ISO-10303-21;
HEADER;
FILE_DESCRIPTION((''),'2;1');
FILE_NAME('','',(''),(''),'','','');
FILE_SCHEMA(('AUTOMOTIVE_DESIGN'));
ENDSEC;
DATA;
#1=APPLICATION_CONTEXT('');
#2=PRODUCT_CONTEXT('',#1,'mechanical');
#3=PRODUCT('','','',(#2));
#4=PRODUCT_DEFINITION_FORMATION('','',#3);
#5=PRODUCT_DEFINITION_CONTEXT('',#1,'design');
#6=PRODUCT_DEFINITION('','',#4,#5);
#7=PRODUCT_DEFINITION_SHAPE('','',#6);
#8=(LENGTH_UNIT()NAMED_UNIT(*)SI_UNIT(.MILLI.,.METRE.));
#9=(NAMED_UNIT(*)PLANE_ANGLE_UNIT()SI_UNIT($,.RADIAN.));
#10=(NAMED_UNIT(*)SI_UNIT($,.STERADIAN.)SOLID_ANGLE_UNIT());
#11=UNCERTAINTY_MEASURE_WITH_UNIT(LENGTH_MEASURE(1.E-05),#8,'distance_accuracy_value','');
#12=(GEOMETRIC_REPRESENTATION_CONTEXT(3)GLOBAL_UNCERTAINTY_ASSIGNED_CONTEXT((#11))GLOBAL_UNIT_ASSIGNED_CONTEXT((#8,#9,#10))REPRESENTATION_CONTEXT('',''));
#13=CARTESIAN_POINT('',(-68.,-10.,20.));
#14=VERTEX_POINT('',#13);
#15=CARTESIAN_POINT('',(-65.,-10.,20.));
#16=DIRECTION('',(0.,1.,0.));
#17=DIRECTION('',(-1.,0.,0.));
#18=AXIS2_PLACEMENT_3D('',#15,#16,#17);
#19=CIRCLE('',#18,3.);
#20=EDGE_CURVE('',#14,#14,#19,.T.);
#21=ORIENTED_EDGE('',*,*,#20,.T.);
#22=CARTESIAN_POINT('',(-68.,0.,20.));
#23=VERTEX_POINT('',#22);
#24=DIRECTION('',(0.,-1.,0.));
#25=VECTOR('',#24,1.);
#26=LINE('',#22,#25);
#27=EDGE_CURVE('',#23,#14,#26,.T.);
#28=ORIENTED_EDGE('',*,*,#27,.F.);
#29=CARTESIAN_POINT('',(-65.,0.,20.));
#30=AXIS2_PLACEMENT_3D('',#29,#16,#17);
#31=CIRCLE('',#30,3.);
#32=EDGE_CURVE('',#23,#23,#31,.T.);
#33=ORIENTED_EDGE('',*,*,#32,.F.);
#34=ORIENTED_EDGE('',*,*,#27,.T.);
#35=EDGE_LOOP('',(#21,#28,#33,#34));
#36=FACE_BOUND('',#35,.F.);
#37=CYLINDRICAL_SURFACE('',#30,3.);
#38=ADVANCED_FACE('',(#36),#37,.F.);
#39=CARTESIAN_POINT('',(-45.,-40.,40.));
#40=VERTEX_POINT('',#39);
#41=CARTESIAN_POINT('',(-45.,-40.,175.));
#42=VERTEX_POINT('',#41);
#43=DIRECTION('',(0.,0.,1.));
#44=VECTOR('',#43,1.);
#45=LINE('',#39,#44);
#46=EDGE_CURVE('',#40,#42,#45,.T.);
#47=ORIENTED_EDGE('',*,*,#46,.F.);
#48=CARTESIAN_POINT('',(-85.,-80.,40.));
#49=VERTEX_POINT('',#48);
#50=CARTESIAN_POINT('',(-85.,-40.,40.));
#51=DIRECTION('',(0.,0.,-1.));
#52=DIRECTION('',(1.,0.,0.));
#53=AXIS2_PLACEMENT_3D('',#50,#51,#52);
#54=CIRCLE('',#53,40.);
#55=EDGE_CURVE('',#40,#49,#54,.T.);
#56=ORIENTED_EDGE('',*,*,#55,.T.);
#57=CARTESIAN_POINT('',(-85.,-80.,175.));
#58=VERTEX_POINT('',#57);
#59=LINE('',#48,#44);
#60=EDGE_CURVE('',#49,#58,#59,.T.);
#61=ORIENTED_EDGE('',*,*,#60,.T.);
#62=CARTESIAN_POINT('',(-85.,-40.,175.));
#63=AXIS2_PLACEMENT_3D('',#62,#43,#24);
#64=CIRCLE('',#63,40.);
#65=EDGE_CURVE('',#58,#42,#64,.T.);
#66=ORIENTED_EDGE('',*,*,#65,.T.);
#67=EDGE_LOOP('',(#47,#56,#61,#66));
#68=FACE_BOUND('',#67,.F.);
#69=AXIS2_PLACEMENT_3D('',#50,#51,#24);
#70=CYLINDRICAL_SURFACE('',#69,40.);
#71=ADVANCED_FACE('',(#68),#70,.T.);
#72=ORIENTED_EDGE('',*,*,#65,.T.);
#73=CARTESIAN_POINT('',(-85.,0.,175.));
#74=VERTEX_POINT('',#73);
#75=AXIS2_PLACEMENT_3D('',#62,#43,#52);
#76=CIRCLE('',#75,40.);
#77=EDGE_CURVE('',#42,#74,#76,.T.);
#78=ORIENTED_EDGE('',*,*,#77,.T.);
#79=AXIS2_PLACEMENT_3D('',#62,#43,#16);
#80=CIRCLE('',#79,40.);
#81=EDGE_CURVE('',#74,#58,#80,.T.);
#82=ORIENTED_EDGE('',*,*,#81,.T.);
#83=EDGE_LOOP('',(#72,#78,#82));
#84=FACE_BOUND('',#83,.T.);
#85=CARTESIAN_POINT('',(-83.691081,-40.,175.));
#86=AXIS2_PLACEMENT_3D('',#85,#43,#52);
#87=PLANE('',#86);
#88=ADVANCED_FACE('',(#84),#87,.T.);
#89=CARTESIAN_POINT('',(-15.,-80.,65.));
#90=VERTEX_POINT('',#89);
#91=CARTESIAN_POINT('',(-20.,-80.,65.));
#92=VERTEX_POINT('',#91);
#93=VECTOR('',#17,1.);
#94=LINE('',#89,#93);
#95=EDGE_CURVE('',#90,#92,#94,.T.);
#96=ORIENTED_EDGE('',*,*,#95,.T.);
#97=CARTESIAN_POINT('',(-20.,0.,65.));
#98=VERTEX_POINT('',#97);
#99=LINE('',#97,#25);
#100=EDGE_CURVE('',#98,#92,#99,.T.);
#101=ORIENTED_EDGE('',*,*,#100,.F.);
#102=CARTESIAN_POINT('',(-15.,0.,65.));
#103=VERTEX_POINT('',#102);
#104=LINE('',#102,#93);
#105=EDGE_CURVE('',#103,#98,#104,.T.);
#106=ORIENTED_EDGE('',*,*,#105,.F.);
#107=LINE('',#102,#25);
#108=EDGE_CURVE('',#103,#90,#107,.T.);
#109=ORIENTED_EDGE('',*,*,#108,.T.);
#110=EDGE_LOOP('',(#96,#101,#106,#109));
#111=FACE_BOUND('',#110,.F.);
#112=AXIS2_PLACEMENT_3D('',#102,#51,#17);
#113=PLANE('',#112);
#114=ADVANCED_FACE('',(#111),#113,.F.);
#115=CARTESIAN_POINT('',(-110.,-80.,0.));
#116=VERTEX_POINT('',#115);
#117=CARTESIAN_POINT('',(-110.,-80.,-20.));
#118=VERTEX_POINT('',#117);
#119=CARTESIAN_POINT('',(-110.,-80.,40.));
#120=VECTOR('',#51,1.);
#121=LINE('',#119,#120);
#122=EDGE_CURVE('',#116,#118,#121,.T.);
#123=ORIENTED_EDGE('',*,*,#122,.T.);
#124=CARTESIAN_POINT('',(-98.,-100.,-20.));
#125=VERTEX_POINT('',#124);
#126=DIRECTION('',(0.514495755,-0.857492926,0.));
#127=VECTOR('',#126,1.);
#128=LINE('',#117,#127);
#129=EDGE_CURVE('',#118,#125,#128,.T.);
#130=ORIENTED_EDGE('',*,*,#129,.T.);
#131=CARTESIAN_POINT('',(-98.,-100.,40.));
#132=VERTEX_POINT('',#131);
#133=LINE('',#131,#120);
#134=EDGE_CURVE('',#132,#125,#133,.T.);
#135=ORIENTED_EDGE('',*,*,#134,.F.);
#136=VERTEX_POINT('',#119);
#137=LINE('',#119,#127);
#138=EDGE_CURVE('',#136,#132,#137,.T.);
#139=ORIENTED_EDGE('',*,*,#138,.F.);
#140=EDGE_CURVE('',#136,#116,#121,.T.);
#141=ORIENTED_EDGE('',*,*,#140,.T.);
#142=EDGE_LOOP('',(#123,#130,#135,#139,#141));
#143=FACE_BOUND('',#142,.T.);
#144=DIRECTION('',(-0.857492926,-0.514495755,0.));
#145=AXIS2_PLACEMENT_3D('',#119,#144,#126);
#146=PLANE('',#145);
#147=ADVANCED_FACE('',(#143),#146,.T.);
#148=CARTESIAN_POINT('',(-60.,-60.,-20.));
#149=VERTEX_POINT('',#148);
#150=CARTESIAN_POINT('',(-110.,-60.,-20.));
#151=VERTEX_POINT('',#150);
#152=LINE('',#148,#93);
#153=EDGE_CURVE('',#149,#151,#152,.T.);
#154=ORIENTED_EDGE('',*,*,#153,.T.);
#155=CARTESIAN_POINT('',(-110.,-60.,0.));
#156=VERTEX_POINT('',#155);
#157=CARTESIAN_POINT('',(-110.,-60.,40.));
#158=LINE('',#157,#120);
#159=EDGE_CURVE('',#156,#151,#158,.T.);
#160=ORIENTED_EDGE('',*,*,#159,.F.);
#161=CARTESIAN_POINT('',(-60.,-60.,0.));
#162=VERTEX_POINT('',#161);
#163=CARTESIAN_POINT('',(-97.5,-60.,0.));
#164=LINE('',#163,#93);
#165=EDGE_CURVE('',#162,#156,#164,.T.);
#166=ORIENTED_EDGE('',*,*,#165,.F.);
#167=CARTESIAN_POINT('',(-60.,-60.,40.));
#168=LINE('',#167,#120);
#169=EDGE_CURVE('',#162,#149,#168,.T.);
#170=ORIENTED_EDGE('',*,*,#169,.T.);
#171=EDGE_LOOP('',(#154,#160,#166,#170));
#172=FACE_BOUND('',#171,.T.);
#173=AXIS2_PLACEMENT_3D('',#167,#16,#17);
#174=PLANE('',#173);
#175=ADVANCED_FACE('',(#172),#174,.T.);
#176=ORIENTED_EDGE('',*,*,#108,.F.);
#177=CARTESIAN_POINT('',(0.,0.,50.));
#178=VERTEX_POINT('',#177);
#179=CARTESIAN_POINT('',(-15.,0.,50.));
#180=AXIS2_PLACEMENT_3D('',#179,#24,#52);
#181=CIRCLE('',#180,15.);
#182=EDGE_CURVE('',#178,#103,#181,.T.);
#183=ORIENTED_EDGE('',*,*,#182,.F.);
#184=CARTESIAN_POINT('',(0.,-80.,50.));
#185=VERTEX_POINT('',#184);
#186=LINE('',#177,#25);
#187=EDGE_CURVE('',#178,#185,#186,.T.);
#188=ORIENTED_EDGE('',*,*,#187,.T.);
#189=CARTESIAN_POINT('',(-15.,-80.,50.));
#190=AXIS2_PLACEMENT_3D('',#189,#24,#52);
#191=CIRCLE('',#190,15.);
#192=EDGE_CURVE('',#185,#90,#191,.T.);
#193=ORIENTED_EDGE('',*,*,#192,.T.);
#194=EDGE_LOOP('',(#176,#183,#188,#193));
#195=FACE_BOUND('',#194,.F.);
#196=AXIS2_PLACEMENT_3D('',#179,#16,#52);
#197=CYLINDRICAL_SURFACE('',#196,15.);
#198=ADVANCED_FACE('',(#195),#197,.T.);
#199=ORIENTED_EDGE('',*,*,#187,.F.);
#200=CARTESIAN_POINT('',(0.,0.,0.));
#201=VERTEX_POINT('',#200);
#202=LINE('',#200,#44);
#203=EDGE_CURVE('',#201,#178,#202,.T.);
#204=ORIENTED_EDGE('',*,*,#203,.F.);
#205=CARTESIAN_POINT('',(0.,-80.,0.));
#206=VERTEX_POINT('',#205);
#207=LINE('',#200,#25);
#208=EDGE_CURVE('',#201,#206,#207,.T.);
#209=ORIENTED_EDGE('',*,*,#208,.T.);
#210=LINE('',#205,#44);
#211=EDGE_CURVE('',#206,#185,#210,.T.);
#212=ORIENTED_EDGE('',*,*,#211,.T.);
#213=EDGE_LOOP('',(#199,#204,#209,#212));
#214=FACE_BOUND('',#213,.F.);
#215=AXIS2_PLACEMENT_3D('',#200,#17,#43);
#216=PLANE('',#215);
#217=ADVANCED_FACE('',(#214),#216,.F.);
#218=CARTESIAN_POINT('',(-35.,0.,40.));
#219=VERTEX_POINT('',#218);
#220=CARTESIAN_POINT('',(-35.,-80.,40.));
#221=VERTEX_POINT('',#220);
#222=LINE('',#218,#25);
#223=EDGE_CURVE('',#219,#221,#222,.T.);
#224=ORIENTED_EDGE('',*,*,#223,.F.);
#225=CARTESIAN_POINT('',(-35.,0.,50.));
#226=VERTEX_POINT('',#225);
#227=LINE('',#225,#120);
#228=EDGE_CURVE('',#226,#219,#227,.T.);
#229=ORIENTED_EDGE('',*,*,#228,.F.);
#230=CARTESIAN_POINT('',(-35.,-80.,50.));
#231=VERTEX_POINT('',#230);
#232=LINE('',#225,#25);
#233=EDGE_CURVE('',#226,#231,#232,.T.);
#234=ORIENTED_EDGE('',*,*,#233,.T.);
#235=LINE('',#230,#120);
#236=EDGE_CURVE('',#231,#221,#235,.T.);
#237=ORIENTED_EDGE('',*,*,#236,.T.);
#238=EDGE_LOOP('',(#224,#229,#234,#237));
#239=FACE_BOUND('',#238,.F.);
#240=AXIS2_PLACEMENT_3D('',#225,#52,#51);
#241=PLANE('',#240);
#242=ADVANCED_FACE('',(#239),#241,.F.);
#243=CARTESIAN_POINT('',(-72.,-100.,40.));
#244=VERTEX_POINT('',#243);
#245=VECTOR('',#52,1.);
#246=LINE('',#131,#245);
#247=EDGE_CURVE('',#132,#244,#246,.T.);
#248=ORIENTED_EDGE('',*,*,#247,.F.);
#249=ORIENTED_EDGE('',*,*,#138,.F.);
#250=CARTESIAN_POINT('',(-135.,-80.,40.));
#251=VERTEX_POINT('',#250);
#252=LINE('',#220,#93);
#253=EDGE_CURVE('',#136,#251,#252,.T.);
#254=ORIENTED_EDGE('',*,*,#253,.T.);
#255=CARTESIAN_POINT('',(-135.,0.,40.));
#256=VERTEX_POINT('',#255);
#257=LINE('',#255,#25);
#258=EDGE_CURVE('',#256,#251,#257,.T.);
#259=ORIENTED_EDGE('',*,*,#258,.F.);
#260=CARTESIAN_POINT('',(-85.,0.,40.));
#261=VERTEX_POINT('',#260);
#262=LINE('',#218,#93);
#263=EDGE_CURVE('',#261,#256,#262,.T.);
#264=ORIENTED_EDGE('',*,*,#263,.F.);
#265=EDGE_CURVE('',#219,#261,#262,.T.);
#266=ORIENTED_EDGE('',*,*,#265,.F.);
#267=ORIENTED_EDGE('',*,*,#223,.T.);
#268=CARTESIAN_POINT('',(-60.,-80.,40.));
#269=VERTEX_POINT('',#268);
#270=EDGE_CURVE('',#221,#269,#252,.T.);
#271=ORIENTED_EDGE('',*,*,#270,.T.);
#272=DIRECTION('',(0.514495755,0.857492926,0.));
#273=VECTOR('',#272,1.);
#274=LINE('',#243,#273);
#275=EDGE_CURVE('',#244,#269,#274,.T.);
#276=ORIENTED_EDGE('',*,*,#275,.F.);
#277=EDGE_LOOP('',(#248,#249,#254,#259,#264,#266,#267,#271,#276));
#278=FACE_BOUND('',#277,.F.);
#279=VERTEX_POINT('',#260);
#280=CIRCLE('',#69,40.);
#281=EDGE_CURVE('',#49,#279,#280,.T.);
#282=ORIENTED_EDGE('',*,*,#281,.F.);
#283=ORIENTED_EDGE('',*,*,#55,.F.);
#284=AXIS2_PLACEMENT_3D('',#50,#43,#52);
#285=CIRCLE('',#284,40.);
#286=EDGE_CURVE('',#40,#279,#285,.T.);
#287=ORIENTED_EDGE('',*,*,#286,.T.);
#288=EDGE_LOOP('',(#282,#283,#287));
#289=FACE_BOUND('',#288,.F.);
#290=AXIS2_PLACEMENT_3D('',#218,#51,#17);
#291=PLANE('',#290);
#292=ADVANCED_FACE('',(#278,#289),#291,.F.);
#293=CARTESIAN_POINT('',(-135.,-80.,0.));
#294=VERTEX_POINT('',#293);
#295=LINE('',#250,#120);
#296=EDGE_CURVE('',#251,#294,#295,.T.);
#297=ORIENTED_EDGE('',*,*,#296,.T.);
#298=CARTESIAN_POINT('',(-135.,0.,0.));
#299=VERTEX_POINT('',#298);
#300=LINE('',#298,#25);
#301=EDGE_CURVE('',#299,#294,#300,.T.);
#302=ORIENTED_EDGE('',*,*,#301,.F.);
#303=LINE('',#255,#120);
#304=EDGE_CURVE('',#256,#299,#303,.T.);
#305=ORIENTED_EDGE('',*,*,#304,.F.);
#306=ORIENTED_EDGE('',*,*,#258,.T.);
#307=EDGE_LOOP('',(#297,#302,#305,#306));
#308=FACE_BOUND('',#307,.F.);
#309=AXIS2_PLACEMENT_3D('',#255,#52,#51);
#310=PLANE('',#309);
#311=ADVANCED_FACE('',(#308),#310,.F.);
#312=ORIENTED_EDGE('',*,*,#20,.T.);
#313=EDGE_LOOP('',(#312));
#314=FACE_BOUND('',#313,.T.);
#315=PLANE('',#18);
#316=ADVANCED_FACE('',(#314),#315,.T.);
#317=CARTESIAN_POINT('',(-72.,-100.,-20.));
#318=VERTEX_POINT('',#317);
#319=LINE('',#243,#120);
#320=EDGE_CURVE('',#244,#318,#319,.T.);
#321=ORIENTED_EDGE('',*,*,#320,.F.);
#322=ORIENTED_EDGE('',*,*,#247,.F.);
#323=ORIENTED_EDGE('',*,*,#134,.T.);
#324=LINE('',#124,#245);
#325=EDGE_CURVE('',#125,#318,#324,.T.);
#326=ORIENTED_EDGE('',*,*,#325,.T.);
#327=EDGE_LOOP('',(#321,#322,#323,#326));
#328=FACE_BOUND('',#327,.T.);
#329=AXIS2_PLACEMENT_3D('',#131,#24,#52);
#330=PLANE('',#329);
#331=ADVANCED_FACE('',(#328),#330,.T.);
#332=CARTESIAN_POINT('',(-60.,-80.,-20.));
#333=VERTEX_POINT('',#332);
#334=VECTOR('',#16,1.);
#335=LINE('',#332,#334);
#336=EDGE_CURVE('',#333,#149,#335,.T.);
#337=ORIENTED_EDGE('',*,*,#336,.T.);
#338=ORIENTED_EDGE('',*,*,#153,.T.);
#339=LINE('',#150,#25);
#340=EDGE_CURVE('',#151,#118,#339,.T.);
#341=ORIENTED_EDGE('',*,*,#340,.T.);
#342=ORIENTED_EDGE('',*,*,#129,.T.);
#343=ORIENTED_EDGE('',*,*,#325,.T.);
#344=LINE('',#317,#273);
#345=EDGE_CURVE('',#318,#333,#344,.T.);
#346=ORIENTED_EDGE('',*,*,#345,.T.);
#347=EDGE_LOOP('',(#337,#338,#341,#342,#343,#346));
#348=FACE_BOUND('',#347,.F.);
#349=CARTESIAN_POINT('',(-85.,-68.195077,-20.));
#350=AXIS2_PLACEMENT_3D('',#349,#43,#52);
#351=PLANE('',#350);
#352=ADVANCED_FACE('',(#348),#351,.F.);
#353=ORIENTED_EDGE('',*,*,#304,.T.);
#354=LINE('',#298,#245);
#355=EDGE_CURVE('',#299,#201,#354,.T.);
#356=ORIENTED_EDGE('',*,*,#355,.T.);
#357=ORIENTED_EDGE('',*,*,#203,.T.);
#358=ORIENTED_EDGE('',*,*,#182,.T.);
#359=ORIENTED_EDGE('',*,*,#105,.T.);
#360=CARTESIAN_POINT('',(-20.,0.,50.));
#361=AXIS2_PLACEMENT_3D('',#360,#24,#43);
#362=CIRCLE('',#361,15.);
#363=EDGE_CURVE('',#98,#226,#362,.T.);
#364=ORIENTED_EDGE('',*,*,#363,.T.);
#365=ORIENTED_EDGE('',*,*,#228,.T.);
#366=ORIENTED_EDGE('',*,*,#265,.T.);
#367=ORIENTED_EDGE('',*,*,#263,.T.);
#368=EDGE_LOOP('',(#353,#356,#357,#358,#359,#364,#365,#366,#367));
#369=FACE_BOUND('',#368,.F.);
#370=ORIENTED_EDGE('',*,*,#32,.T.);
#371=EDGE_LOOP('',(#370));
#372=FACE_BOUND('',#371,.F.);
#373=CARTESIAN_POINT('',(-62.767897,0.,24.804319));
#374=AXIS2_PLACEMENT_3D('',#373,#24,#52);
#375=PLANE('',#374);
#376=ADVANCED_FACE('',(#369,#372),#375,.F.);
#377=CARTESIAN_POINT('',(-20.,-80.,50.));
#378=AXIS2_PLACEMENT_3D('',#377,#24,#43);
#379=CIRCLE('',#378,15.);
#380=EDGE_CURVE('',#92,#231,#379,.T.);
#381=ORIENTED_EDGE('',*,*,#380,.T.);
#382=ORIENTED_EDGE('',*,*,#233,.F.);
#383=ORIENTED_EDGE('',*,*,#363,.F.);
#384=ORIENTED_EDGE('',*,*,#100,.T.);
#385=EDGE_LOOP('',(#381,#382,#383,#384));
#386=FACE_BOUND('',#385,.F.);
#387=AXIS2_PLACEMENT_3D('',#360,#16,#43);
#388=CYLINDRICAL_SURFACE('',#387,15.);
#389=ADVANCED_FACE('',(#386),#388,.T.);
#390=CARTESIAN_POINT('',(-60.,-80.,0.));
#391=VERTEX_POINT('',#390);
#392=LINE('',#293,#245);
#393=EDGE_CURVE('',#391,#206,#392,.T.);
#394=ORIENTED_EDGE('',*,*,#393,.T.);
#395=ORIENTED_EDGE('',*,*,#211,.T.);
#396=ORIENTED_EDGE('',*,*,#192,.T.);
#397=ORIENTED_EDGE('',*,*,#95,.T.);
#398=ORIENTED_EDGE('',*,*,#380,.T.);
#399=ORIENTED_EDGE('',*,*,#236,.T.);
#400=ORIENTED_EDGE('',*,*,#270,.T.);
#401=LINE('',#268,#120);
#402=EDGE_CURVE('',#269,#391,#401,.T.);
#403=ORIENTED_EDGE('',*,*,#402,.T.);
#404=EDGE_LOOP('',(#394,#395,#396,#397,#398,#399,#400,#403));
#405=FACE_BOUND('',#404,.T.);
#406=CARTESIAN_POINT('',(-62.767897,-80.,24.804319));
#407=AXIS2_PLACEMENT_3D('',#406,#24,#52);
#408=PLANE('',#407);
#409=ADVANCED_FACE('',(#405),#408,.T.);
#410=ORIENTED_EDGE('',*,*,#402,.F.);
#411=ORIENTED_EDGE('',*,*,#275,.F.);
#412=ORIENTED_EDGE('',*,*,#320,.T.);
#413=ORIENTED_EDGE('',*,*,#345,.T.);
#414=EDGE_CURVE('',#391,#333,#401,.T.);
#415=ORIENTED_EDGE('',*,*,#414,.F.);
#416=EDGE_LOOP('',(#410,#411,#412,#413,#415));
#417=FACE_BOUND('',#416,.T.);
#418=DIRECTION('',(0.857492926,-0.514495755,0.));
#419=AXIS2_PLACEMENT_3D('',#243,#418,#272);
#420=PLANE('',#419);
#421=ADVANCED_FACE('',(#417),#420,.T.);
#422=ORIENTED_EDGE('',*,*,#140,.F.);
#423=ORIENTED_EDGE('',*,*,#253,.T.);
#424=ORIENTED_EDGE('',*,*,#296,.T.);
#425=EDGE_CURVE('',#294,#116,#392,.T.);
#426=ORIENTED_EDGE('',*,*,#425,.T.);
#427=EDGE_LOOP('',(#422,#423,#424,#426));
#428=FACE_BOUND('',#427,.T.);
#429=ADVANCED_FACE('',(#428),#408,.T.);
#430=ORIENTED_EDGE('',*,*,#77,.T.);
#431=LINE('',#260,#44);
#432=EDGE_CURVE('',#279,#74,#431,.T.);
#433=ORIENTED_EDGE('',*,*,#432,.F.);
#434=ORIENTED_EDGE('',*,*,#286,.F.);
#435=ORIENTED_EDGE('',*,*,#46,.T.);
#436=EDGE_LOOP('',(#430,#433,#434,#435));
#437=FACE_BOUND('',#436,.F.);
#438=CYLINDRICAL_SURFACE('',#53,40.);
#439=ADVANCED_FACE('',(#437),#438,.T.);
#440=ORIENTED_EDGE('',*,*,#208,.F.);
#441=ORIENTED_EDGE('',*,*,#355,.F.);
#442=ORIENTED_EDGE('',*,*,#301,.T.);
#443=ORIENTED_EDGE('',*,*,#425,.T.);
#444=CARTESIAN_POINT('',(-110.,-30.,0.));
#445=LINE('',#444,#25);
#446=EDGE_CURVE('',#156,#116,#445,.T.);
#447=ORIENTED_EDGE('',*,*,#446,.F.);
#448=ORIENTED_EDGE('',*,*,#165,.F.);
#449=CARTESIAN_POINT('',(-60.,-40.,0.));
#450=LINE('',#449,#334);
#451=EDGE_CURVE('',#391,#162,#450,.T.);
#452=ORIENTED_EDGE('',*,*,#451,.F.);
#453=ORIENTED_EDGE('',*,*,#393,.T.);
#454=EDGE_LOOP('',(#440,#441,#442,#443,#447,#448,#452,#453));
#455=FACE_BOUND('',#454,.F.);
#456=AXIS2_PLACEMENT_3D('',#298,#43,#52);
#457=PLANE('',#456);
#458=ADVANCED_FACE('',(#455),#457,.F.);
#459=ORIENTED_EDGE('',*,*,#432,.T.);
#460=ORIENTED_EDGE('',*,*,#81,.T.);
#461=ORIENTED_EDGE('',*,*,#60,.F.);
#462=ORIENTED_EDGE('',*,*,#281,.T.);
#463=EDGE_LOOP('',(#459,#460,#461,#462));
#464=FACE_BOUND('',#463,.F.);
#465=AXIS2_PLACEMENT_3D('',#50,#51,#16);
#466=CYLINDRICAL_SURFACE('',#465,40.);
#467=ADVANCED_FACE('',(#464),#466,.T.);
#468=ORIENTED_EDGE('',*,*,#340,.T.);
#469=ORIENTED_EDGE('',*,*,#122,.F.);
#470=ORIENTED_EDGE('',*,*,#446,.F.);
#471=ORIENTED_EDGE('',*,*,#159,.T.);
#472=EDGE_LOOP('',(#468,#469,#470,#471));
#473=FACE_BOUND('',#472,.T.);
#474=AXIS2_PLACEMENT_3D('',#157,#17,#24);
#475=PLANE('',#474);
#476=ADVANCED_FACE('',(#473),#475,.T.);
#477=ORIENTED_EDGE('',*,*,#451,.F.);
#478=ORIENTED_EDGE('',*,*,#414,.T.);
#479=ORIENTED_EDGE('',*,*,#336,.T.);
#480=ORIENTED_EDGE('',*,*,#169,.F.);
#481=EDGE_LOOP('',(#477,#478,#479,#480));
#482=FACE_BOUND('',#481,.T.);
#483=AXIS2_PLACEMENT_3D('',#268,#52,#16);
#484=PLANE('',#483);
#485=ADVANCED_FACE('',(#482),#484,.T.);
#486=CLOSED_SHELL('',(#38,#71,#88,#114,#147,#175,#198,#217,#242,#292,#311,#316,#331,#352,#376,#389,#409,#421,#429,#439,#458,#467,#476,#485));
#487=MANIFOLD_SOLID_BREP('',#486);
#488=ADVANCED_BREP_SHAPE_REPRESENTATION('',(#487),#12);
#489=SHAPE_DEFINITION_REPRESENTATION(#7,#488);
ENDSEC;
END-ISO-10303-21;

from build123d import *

# Parameters (mm, degrees)
F1_DEPTH = 80
F3_DEPTH = 135
F5_DEPTH = 60
F6_R     = 3
F7_DEPTH = 10


# Not quite as in the source:
# - a feature names something its author has since deleted; it is built from what else it names


with BuildPart() as f1:
    # F0 (on Front) → F1 (new body)
    with BuildSketch(Plane.XZ):
        with BuildLine():
            Line((-135, 0), (0, 0))
            Line((0, 0), (0, 50))
            ThreePointArc((0, 50), (-4.3933982822, 60.6066017178), (-15, 65))
            Line((-15, 65), (-20, 65))
            ThreePointArc((-20, 65), (-30.6066017178, 60.6066017178), (-35, 50))
            Line((-35, 50), (-35, 40))
            Line((-35, 40), (-135, 40))
            Line((-135, 40), (-135, 0))
        make_face()
    extrude(amount=F1_DEPTH)

    # F2 (on face) → F3 (join)
    with BuildSketch(Plane.XY.offset(40)):
        with BuildLine():
            ThreePointArc((-45, -40), (-56.7157287525, -11.7157287525), (-85, 0))
            ThreePointArc((-85, 0), (-125, -40), (-85, -80))
            ThreePointArc((-85, -80), (-56.7157287525, -68.2842712475), (-45, -40))
        make_face()
    extrude(amount=F3_DEPTH)

    # F4 (on face) → F5 (join)
    with BuildSketch(Plane.XY.offset(40)):
        with BuildLine():
            Line((-60, -60), (-110, -60))
            Line((-110, -60), (-110, -71.224989992))
            ThreePointArc((-110, -71.224989992), (-98.247648854, -77.7425462819), (-85, -80))
            ThreePointArc((-85, -80), (-71.7523511459, -77.7425462819), (-60, -71.224989992))
            Line((-60, -71.224989992), (-60, -60))
        make_face()
        with BuildLine():
            ThreePointArc((-85, -80), (-98.247648854, -77.7425462819), (-110, -71.224989992))
            Line((-110, -71.224989992), (-110, -80))
            Line((-110, -80), (-98, -100))
            Line((-98, -100), (-72, -100))
            Line((-72, -100), (-60, -80))
            Line((-60, -80), (-85, -80))
        make_face()
        with BuildLine():
            Line((-60, -80), (-60, -71.224989992))
            ThreePointArc((-60, -71.224989992), (-71.7523511459, -77.7425462819), (-85, -80))
            Line((-85, -80), (-60, -80))
        make_face()
    extrude(amount=-F5_DEPTH)

    # F6 (on face) → F7 (cut)
    with BuildSketch(Plane(origin=(0, 0, 0), x_dir=(-1, 0, 0), z_dir=(0, 1, 0))):
        with Locations((65, 20)):
            Circle(F6_R)
    extrude(amount=-F7_DEPTH, mode=Mode.SUBTRACT)


solid = f1.part
